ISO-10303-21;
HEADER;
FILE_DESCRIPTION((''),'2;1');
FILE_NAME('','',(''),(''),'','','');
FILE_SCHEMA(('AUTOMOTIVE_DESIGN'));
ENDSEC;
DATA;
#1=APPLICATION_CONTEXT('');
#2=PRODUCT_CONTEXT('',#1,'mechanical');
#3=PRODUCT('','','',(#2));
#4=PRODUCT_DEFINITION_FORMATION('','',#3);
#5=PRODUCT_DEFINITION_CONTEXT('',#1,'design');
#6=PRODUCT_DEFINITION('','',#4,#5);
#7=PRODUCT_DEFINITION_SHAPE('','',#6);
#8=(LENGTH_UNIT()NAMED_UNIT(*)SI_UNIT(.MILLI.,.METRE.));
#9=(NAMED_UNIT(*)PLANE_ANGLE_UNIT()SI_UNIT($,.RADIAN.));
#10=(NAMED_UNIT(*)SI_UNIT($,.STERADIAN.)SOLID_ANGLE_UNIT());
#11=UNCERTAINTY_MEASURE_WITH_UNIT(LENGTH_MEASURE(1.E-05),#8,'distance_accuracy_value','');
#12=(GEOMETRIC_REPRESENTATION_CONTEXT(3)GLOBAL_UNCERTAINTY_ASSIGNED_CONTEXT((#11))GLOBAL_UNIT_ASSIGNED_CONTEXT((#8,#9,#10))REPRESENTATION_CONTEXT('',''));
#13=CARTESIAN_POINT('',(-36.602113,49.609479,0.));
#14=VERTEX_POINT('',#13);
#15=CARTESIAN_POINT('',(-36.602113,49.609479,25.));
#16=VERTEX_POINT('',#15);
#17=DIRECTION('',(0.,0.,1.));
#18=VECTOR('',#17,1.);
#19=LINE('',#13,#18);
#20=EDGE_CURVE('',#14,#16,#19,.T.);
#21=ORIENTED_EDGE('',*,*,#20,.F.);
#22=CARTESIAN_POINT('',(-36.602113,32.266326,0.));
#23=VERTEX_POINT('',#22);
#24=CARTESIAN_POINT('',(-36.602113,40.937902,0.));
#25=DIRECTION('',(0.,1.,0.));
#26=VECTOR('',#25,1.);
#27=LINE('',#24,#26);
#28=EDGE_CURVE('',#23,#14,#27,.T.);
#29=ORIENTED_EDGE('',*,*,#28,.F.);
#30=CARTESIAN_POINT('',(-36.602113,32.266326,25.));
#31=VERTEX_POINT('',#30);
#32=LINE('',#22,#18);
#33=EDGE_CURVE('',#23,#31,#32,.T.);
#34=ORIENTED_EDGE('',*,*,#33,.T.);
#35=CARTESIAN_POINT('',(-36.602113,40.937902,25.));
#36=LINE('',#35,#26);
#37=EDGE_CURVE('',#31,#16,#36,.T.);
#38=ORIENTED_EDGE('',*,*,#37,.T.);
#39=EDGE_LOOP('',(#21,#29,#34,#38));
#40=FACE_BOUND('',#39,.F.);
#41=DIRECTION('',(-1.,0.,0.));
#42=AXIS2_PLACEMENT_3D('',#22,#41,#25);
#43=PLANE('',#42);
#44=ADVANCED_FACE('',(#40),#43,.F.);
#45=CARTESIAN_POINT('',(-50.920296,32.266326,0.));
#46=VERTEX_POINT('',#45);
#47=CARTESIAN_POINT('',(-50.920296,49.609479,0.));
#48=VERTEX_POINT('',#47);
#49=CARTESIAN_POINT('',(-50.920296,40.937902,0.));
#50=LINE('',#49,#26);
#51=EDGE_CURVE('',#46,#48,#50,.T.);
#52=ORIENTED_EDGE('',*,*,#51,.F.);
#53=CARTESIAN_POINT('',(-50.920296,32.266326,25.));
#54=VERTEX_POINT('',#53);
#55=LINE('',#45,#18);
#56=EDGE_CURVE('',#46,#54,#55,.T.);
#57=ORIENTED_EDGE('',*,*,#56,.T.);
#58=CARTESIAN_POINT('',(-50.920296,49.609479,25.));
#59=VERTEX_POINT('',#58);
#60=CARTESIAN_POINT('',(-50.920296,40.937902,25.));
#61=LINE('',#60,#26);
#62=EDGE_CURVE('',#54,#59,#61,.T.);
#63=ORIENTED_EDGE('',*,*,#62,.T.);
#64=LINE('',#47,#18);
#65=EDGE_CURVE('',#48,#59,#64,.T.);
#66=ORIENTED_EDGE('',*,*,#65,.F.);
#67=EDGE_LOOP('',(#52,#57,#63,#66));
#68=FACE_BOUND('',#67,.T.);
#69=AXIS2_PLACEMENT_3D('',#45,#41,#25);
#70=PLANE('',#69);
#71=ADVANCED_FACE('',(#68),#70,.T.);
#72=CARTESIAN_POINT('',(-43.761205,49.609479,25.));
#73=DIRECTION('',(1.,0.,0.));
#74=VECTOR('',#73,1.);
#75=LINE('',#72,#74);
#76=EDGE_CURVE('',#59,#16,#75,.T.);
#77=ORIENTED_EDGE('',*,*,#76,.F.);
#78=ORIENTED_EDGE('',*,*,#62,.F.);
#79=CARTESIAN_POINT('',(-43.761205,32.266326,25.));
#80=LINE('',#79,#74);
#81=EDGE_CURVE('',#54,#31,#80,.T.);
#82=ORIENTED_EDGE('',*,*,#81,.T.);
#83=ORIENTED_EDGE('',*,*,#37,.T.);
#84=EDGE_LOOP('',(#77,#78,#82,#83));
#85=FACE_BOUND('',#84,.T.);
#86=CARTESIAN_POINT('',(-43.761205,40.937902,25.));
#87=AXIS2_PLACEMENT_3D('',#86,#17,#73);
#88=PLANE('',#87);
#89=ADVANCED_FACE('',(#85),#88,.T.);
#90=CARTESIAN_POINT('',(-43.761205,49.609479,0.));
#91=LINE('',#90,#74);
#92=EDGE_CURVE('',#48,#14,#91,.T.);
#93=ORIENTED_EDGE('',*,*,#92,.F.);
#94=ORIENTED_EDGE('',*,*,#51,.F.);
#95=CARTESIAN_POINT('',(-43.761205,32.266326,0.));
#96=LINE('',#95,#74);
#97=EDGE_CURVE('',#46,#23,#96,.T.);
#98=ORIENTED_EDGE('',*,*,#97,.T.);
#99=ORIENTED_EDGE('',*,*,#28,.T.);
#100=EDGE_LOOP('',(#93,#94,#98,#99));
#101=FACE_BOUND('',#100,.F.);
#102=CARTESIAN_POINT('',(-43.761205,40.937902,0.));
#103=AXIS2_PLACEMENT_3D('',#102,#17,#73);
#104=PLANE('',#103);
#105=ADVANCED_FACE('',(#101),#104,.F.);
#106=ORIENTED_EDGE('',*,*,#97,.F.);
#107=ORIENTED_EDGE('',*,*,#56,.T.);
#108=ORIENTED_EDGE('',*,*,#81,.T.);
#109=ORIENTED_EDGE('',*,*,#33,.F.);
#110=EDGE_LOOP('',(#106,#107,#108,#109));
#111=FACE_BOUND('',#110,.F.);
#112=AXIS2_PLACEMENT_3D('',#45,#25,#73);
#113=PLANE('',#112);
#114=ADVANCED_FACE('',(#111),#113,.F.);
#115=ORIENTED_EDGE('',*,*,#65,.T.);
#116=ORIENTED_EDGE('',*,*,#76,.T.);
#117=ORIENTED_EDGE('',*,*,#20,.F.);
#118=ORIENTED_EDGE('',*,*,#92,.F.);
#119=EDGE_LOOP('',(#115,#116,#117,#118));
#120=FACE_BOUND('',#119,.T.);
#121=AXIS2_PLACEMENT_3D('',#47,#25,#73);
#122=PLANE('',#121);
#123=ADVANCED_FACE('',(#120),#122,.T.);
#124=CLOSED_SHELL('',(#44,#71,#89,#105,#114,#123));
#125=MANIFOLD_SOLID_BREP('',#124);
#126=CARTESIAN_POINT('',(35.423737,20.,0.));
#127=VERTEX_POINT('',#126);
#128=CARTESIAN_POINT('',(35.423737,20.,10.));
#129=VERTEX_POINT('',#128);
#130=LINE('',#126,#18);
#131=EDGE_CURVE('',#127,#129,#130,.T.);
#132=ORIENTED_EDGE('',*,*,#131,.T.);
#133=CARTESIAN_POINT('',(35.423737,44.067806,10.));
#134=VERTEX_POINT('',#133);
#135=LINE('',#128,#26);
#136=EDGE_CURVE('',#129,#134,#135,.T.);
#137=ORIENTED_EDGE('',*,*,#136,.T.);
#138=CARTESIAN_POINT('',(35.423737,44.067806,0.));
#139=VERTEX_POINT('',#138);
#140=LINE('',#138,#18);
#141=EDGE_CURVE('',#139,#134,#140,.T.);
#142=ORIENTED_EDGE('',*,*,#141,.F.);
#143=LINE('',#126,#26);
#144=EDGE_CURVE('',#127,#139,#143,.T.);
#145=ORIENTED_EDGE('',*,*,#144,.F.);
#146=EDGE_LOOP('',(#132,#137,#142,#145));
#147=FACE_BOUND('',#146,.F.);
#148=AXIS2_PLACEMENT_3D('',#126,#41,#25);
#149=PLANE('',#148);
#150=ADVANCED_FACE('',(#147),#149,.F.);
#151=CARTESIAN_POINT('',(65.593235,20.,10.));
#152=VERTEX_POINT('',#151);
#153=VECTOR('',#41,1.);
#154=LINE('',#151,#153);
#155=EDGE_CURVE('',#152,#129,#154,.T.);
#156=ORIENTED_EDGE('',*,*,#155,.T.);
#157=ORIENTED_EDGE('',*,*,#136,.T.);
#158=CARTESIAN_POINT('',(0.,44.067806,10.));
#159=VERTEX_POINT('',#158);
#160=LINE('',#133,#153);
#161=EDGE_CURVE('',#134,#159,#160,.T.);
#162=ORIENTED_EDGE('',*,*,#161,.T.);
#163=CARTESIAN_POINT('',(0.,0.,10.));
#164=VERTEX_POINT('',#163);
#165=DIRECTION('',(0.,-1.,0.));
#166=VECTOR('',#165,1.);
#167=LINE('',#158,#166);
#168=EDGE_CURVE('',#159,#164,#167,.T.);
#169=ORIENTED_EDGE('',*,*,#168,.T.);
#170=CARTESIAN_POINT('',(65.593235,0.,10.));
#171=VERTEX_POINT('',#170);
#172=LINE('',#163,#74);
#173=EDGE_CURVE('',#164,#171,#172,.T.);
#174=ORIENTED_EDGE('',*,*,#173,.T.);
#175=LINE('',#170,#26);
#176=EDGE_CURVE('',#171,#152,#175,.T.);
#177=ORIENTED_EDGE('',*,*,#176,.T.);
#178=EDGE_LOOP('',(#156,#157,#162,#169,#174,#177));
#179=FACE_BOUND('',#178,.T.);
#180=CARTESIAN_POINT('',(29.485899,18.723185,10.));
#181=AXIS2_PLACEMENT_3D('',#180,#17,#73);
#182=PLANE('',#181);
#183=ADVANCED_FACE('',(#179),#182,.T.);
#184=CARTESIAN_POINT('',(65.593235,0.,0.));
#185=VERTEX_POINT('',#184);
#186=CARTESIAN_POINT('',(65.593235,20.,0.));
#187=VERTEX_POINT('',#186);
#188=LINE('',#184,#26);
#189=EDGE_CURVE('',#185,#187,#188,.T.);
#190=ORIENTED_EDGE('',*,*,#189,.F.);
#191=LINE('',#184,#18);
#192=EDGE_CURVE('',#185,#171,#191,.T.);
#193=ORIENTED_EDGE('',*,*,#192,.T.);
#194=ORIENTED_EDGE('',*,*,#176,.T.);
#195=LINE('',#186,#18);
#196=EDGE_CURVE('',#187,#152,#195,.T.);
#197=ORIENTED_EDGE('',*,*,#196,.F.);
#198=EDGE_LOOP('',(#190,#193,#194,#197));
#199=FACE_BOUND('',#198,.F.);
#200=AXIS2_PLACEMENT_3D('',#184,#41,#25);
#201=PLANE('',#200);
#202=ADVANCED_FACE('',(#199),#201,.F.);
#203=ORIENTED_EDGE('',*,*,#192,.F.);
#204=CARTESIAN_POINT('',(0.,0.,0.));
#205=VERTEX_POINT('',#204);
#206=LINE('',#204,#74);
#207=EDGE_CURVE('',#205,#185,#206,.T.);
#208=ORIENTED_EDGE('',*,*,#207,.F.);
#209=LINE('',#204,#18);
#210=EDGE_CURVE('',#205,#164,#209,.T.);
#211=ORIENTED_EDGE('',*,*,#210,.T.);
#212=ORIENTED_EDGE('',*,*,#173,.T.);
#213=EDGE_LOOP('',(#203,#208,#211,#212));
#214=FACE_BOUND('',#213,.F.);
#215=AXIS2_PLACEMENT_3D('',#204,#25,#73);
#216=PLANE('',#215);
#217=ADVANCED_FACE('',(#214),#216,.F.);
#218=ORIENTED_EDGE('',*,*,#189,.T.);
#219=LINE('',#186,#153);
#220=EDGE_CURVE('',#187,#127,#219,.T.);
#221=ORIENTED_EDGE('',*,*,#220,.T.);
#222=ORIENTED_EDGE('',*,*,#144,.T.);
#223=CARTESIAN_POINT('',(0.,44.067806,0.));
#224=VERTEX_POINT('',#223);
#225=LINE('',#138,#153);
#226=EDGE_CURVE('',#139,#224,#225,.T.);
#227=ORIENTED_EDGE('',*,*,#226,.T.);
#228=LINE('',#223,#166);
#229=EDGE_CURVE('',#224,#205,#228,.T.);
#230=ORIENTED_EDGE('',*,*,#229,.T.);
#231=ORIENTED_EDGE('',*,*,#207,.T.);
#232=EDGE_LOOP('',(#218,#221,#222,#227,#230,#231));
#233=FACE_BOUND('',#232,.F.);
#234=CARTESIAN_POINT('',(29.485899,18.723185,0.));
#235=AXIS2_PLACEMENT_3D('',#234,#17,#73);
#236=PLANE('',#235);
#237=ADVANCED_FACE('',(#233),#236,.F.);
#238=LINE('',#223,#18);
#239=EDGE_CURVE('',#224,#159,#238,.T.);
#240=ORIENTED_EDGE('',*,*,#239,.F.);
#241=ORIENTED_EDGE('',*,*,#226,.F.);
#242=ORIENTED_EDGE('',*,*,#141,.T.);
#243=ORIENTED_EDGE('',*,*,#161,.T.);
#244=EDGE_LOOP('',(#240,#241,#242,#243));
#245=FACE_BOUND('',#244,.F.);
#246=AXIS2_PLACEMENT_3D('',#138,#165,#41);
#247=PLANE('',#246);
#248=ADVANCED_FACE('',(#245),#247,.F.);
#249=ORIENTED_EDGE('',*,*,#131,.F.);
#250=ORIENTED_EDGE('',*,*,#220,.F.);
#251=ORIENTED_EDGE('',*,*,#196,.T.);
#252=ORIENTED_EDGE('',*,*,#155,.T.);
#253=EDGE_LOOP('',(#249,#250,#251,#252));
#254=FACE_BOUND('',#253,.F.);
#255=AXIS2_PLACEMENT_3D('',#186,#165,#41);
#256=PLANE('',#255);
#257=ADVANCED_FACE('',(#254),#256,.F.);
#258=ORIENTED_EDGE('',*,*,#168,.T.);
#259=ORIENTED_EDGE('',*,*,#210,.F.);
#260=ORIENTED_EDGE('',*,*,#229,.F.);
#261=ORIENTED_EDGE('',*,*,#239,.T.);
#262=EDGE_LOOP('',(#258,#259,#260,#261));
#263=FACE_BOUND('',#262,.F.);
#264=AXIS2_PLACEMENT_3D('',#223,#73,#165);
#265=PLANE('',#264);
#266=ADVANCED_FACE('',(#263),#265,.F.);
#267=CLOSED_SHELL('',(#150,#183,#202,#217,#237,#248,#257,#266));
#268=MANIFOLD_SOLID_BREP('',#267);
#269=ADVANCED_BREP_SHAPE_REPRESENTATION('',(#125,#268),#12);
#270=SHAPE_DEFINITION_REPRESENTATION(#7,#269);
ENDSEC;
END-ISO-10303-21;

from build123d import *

# Parameters (mm, degrees)
F2_DEPTH = 10
F3_W     = 14.3181830645
F3_H     = 17.3431523144
F4_DEPTH = 25


# Not quite as in the source:
# - a feature names something its author has since deleted; it is built from what else it names


with BuildPart() as f2:
    # F0 (on Top) → F2 (new body)
    with BuildSketch(Plane.XY):
        Polygon((0, 44.0678059284), (0, 0), (65.5932351728, 0), (65.5932351728, 20), (35.4237365217, 20), (35.4237365217, 44.0678059284), align=None)
    extrude(amount=F2_DEPTH)


with BuildPart() as f4:
    # F3 (on Top) → F4 (new body)
    with BuildSketch(Plane.XY):
        with Locations((-43.7612049282, 40.9379024059)):
            Rectangle(F3_W, F3_H)
    extrude(amount=F4_DEPTH)


solid = Compound([f2.part, f4.part])
